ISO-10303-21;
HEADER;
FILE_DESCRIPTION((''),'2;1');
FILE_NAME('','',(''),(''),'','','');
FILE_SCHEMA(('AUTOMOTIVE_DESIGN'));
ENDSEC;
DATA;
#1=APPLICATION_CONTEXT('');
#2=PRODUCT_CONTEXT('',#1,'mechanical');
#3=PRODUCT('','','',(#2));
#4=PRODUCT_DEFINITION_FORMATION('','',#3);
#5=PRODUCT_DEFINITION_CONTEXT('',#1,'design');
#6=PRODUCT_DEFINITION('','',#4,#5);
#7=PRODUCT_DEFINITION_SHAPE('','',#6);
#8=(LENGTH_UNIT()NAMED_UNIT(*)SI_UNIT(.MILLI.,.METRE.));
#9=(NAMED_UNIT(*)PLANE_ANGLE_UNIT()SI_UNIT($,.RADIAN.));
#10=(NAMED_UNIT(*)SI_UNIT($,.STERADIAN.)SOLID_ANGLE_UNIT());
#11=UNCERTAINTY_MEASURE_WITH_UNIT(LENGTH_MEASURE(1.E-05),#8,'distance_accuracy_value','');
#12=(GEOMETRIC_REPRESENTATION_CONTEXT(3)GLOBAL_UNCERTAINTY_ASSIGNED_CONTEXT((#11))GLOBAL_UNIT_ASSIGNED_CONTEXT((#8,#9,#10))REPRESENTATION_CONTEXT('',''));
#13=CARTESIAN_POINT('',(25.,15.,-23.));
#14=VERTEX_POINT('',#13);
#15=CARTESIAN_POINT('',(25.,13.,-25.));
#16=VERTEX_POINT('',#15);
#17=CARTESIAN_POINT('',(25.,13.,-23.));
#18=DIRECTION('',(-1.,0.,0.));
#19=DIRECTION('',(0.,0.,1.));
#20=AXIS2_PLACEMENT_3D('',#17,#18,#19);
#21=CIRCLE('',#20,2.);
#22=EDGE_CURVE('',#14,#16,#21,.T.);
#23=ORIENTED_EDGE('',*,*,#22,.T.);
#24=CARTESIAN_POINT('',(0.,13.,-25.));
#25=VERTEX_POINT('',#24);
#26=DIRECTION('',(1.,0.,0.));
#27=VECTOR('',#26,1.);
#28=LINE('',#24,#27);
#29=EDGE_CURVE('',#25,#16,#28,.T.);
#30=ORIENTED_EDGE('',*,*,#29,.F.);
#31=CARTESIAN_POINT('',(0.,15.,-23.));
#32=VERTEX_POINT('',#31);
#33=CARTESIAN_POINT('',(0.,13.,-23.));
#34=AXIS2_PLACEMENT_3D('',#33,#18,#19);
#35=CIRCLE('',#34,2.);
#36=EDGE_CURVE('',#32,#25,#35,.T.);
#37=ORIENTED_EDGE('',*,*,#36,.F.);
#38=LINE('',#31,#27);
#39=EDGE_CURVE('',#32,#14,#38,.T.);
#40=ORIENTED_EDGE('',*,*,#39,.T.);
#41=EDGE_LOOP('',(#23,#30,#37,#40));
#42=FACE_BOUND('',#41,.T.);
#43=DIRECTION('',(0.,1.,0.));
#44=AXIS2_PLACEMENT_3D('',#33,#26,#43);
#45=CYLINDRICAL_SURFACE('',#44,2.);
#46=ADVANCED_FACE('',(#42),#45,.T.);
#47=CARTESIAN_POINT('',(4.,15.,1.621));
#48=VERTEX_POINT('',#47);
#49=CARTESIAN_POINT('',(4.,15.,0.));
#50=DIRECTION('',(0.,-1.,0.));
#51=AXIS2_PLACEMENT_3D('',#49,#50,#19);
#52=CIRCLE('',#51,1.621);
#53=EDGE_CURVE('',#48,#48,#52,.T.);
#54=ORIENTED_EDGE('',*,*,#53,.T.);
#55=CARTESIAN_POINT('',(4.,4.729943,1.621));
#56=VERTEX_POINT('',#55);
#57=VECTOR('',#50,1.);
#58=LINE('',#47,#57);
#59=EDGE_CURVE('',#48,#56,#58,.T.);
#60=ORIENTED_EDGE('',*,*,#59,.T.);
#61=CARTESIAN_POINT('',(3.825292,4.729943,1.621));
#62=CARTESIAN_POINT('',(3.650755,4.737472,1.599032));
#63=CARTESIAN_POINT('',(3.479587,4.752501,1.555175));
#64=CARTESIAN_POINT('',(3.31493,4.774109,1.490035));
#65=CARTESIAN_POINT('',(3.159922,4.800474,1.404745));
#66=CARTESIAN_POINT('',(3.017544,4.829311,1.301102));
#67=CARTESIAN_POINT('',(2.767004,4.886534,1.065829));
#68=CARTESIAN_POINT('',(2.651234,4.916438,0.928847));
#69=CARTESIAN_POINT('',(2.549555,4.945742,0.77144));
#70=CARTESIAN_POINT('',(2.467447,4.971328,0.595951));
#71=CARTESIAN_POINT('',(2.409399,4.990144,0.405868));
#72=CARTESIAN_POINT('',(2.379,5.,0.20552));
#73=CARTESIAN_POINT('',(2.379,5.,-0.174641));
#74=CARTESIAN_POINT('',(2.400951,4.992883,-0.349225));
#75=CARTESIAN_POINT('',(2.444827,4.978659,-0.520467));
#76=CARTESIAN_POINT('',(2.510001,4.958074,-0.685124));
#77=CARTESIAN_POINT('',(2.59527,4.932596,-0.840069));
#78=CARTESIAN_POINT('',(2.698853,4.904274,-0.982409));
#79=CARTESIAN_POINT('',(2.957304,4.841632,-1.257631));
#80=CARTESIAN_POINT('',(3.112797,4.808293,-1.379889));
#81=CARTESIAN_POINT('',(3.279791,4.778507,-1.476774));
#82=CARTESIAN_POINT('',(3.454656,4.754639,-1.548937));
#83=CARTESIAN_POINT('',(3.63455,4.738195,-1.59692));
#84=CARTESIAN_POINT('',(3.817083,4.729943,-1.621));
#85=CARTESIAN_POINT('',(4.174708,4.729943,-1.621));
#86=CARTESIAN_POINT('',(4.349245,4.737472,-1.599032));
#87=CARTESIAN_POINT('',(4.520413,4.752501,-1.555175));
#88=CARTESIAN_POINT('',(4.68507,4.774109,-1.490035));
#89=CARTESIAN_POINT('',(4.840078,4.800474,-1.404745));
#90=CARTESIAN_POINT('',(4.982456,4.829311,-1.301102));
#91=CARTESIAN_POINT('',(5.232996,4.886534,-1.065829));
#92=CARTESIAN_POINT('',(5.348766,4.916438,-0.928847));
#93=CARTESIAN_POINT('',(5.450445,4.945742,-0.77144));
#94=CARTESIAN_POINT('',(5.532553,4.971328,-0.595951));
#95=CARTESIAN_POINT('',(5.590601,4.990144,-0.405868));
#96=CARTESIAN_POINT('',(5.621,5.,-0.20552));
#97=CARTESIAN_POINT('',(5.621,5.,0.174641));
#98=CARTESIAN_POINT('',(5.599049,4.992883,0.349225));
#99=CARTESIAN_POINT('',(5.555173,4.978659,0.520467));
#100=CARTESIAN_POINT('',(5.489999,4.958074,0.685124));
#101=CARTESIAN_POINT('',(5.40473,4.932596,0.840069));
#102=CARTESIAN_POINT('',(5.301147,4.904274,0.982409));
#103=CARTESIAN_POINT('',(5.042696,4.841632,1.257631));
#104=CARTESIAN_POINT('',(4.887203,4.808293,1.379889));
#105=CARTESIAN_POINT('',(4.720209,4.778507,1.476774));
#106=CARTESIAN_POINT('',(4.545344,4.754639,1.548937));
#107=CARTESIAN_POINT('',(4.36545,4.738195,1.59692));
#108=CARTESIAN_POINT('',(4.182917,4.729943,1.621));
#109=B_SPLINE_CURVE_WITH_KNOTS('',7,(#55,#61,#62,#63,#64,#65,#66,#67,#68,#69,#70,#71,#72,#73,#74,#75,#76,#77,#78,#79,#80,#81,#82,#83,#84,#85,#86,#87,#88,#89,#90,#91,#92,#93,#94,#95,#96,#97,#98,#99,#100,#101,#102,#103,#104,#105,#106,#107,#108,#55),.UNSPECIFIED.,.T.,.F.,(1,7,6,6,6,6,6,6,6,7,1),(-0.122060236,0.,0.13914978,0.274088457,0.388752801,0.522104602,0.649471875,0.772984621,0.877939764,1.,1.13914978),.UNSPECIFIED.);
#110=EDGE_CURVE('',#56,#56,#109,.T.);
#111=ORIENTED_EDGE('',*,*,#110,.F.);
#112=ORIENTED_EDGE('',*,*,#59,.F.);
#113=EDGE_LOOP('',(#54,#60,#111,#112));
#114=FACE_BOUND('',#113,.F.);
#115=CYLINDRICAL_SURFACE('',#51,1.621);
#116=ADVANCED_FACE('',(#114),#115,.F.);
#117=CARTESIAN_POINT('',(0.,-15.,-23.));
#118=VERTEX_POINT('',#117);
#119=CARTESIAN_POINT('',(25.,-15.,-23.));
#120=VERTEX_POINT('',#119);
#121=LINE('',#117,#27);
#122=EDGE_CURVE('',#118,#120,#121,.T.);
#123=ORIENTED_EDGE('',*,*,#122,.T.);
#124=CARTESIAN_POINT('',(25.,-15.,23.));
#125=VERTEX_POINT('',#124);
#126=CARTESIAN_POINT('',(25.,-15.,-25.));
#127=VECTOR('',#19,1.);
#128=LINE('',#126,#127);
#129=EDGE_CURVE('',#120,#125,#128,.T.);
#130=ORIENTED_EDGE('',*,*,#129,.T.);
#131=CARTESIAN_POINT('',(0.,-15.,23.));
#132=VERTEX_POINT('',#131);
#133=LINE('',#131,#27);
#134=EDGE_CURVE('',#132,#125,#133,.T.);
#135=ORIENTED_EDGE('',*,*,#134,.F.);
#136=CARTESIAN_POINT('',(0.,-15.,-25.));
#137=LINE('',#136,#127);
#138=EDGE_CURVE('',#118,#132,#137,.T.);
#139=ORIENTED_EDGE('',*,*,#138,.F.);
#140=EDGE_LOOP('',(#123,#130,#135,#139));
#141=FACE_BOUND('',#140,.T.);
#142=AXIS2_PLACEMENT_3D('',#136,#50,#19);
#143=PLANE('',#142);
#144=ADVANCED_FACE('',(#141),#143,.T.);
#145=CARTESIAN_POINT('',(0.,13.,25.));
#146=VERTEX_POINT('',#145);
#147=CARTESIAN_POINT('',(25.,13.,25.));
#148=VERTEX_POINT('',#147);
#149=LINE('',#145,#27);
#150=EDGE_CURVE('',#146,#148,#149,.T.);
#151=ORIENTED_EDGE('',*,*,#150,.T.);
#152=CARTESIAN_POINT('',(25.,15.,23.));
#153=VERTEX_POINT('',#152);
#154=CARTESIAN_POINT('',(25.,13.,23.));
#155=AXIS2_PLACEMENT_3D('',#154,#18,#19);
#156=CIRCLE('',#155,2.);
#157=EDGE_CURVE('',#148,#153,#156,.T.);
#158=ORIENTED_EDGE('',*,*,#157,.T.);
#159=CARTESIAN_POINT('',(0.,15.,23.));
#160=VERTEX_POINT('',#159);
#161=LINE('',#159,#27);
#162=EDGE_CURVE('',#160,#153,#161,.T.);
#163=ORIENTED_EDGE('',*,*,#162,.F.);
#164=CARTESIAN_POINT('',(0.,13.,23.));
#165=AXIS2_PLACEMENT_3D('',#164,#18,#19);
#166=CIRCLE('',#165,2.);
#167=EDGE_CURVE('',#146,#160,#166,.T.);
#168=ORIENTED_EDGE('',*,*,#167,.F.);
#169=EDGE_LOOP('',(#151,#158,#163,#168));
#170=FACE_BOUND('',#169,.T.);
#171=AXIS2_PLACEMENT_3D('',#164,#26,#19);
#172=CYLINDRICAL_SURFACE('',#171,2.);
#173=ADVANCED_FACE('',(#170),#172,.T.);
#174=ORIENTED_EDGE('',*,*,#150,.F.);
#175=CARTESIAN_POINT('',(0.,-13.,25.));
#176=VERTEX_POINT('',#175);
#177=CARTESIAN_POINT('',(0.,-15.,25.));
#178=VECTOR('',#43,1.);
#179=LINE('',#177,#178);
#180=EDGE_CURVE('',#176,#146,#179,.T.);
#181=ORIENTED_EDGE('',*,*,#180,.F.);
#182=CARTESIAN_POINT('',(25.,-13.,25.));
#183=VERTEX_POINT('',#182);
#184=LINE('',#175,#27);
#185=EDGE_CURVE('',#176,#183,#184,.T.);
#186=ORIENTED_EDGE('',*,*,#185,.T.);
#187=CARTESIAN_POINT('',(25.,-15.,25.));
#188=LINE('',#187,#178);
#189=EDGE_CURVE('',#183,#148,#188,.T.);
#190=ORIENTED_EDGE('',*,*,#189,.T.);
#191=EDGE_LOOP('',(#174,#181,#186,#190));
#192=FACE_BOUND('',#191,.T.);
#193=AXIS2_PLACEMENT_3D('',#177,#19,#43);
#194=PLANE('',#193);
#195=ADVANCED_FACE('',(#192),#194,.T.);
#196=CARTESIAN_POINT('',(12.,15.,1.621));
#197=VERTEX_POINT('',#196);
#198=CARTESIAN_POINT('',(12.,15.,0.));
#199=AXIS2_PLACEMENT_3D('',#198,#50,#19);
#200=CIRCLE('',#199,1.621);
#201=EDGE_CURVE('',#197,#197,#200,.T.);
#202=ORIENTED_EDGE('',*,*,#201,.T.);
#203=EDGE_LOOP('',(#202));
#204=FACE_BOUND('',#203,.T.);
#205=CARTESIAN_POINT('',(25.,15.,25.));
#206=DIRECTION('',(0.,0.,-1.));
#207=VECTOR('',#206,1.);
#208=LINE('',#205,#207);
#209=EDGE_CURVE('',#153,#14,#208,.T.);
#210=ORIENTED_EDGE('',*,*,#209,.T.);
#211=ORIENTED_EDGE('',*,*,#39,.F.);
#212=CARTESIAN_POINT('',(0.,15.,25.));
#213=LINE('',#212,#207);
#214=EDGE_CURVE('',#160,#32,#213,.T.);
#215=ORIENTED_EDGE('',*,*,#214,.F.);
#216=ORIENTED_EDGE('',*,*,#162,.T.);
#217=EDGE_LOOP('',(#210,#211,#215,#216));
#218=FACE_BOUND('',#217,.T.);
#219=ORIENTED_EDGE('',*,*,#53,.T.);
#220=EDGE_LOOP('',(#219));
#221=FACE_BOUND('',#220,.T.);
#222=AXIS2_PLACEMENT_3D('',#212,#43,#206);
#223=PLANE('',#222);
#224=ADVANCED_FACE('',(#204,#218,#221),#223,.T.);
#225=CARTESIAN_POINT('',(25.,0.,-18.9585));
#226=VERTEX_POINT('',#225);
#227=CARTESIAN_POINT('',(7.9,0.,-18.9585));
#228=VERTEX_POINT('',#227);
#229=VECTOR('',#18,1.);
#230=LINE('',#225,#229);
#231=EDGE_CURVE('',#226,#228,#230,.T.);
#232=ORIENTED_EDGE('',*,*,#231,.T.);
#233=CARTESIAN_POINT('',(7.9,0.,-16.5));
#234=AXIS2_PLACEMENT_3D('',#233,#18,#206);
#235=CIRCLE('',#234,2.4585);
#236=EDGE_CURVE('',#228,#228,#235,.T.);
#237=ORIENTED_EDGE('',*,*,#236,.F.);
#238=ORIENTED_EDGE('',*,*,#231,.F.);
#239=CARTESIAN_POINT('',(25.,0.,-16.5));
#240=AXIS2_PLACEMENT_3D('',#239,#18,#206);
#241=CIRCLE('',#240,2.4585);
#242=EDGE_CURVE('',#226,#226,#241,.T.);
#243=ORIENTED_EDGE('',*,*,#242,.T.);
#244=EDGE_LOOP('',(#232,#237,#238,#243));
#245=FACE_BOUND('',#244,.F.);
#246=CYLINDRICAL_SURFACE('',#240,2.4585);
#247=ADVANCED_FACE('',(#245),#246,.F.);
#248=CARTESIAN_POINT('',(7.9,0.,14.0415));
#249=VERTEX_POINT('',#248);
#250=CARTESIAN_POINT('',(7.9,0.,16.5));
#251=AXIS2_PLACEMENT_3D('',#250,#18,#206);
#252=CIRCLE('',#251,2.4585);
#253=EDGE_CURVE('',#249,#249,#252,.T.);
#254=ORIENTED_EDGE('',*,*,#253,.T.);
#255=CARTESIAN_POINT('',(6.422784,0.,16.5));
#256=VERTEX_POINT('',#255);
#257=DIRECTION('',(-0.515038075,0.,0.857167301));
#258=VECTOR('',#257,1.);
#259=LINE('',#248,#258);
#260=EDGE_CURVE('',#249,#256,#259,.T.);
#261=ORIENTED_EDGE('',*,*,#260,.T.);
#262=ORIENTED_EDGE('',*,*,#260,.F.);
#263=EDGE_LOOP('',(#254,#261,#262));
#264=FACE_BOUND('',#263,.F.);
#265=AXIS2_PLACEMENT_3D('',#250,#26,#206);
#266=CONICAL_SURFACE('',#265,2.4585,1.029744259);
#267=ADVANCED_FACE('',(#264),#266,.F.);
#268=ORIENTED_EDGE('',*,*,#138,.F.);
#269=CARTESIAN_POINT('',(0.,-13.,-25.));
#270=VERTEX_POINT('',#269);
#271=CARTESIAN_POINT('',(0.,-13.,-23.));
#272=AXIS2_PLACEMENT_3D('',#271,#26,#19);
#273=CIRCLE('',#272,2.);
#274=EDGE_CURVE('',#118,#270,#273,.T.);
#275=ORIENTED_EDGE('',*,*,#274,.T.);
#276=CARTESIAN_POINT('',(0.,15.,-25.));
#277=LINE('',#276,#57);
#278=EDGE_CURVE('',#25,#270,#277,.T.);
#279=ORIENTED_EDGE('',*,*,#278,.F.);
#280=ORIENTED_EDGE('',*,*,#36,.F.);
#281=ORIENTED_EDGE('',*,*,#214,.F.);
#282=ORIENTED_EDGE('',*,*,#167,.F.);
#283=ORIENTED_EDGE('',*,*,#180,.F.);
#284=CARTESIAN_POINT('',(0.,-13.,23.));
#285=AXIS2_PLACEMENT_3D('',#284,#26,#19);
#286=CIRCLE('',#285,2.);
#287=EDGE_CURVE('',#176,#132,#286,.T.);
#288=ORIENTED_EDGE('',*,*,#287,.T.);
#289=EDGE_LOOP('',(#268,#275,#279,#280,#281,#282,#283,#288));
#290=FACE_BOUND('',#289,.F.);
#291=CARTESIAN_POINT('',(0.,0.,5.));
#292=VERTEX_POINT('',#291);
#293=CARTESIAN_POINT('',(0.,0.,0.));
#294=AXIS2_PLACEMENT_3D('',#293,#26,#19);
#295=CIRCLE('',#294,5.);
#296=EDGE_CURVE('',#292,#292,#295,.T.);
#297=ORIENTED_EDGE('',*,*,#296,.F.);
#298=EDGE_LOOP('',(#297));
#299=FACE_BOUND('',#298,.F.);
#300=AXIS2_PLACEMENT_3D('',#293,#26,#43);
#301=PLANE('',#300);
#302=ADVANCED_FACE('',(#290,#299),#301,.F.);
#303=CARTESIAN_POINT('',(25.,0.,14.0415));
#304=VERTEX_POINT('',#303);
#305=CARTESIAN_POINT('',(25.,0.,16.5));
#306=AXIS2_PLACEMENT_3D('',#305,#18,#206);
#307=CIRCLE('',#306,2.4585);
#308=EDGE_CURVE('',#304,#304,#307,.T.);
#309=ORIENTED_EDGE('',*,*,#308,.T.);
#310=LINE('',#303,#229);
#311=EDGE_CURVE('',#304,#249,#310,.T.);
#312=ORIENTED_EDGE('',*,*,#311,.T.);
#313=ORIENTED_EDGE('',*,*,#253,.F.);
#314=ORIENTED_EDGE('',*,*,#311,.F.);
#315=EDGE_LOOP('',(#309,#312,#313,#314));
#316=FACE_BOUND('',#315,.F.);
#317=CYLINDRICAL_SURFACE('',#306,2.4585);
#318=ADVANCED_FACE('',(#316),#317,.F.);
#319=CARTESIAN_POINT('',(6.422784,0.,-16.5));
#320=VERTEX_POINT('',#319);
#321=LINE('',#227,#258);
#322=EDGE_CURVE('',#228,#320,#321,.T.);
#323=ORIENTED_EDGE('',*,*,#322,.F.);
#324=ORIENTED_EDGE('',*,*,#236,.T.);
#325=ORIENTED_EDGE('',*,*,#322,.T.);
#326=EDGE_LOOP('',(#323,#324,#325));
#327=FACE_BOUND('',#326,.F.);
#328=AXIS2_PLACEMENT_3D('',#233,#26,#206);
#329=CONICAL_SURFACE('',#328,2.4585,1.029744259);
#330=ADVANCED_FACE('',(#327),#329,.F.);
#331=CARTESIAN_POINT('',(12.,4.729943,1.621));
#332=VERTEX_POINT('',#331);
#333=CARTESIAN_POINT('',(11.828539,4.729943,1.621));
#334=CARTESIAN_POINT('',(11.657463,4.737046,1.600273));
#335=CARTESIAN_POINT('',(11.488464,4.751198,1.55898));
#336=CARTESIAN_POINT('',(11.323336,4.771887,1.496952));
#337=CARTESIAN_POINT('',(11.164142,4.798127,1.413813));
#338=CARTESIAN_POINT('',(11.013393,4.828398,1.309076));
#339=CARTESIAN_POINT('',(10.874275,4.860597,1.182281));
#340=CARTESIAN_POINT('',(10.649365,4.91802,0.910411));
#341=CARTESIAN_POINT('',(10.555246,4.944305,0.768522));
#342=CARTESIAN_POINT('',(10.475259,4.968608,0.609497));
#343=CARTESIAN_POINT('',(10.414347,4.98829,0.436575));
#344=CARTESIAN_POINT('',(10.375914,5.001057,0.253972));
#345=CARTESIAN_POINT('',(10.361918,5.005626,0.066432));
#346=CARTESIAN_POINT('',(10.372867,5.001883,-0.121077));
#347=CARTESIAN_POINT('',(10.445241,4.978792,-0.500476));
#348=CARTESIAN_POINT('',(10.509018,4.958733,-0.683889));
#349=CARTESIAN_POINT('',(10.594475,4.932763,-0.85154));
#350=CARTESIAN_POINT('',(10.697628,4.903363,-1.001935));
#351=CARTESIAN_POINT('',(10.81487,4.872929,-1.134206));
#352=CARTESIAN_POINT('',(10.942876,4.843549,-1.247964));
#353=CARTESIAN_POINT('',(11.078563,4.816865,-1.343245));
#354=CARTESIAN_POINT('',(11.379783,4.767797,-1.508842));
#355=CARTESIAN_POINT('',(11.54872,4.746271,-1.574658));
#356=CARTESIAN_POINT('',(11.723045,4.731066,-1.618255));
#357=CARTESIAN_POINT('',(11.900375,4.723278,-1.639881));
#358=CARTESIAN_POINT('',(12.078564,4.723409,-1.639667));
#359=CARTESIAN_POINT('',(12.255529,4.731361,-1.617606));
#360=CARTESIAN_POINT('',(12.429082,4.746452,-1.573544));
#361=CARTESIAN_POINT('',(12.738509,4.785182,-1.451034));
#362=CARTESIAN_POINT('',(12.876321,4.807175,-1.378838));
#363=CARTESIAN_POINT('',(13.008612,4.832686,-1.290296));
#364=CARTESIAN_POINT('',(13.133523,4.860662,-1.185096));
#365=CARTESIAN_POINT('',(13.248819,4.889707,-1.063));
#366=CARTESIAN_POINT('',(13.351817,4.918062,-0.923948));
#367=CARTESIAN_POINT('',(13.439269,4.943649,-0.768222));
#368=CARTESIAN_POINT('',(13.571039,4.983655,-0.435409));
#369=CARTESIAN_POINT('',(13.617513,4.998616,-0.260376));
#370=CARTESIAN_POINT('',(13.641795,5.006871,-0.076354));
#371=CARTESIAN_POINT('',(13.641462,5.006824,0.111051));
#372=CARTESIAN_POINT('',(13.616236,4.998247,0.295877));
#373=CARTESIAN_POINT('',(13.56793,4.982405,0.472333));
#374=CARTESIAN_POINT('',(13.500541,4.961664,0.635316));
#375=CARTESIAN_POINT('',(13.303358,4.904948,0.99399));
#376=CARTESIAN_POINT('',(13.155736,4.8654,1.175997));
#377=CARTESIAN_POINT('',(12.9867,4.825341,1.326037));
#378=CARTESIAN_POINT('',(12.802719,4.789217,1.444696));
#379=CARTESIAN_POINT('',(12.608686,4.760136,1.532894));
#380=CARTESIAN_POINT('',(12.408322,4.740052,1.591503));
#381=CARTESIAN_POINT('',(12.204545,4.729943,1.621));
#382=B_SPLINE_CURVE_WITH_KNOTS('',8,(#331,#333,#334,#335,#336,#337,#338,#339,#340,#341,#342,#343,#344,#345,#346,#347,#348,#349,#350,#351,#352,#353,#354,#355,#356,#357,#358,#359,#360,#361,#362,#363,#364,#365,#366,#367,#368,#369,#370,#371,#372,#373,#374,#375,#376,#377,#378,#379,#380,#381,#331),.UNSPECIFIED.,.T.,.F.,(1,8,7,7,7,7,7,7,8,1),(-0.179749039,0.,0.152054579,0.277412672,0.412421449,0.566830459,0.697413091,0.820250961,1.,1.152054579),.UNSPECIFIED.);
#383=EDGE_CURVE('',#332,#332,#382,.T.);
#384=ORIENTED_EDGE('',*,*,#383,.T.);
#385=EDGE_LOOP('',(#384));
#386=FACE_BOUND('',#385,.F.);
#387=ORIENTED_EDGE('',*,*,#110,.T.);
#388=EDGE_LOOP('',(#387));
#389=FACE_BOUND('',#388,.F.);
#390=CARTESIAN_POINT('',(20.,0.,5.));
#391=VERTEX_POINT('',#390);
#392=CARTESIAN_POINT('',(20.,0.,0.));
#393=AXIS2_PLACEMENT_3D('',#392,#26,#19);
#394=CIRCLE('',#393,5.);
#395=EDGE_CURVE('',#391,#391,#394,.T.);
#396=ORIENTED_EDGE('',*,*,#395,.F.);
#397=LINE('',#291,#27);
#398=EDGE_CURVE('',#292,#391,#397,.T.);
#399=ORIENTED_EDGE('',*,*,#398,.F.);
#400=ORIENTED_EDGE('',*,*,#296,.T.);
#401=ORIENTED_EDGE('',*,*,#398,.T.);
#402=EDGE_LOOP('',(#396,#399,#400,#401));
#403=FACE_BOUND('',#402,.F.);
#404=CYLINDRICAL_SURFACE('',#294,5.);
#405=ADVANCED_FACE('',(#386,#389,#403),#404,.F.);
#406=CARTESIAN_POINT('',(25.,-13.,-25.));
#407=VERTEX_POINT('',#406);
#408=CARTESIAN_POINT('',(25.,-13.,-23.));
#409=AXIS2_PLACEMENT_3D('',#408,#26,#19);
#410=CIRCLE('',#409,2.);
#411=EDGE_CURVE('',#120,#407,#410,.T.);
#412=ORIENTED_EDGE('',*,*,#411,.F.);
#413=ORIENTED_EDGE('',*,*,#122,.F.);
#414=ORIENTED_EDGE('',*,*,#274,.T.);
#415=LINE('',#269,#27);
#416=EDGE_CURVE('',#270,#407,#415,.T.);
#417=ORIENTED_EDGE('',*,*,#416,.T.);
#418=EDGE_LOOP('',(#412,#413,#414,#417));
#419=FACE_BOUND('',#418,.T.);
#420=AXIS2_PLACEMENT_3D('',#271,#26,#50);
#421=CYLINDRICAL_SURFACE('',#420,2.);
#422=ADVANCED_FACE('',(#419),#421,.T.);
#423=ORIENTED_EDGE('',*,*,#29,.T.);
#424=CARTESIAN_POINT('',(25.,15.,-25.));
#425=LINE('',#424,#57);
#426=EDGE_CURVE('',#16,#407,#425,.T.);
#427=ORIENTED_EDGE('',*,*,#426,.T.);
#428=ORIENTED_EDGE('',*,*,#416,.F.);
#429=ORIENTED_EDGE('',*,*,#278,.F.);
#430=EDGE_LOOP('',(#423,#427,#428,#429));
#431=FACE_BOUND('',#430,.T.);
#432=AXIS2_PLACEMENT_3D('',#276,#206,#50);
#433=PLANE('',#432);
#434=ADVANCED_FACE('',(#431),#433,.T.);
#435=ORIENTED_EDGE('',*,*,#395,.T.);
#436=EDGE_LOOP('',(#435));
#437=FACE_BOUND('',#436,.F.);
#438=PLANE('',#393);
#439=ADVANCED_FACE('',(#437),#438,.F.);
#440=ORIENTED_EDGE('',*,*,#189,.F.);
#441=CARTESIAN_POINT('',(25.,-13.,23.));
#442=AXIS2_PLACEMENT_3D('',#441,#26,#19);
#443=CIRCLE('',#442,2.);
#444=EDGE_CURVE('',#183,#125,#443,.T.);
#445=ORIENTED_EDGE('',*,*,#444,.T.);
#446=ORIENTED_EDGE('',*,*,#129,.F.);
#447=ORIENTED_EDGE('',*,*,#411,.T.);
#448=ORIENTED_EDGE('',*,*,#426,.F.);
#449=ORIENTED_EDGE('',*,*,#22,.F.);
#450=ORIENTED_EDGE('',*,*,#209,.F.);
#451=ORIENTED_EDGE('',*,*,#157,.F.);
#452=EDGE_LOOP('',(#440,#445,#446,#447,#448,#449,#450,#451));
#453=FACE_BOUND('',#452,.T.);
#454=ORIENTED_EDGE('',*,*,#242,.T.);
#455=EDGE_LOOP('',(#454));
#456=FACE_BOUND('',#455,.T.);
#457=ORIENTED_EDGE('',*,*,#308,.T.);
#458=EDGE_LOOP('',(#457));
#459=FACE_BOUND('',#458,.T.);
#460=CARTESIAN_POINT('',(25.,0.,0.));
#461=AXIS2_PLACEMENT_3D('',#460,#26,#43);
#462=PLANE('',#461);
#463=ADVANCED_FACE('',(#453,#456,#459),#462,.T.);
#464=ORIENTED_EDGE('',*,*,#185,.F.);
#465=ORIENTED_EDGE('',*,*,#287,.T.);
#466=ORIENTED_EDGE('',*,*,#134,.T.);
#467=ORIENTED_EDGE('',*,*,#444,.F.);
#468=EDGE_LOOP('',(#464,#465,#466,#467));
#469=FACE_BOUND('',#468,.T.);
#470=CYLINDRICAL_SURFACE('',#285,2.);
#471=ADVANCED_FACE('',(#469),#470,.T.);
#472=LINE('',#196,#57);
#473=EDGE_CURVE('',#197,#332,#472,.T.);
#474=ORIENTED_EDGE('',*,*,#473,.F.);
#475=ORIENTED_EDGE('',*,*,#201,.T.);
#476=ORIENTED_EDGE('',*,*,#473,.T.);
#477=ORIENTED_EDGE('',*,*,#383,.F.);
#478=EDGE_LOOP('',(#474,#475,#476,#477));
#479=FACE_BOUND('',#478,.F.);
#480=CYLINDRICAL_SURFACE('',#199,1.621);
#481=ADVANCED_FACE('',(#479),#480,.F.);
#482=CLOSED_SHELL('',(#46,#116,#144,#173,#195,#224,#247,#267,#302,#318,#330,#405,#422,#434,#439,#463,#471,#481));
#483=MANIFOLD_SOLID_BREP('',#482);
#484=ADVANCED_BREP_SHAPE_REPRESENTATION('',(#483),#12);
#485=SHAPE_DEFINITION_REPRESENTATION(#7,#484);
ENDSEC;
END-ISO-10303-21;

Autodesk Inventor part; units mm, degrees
ref_plane "YZ Plane" through (0, 0, 0) normal (1, 0, 0) x (0, 1, 0)
ref_plane "XZ Plane" through (0, 0, 0) normal (0, 1, 0) x (-1, 0, 0)
ref_plane "XY Plane" through (0, 0, 0) normal (0, 0, 1) x (1, 0, 0)
sketch "Sketch1" plane through (0, 0, 0) normal (1, 0, 0) x (0, 1, 0)
  line L0 (-15, 25) -> (15, 25)
  line L1 (15, 25) -> (15, -25)
  line L2 (15, -25) -> (-15, -25)
  line L3 (-15, -25) -> (-15, 25)
  line L4 (-15, 25) -> (15, -25) construction
  line L5 (15, 25) -> (-15, -25) construction
  point P0 (0, 0)
  dimension "d1" = 50
  dimension "d2" = 30
extrude "Extrusion1" add sketch "Sketch1" along normal blind 25
hole "Hole1" at (0, 0, 0) direction (1, 0, 0) diameter 10 depth 20
sketch "Sketch2" plane through (0, 15, 25) normal (0, 1, 0) x (1, 0, 0)
  line L0 (0, 25) -> (25, 25) construction
  line L1 (25, 50) -> (25, 0) construction
  line L2 (0, 50) -> (0, 0) construction
  point P0 (4, 25)
  point P1 (12, 25)
  dimension "d12" = 4
  dimension "d13" = 12
hole "Hole2" at (4, 15, 0) at (12, 15, 0) direction (0, -1, 0) diameter 3.242 end up to surface thread size "M4x0.7" class "6H" standard "ISO Metric profile"
sketch "Sketch3" plane through (25, 0, 0) normal (1, 0, 0) x (0, 0, -1)
  line L0 (-16.5, 0) -> (0, 0) construction
  line L1 (0, 0) -> (16.5, 0) construction
  dimension "d21" = 33
hole "Hole3" at (25, 0, 16.5) at (25, 0, -16.5) direction (-1, 0, 0) diameter 4.917 depth 17.1 tip angle 118 thread size "M6x1" class "6H" standard "ISO Metric profile"
fillet "Fillet1" radius 2 4 edges at (12.5, 15, -25) (12.5, -15, -25) (12.5, -15, 25) (12.5, 15, 25)
properties part number "axle_tube_mount_10mm" material "Steel, Alloy"
